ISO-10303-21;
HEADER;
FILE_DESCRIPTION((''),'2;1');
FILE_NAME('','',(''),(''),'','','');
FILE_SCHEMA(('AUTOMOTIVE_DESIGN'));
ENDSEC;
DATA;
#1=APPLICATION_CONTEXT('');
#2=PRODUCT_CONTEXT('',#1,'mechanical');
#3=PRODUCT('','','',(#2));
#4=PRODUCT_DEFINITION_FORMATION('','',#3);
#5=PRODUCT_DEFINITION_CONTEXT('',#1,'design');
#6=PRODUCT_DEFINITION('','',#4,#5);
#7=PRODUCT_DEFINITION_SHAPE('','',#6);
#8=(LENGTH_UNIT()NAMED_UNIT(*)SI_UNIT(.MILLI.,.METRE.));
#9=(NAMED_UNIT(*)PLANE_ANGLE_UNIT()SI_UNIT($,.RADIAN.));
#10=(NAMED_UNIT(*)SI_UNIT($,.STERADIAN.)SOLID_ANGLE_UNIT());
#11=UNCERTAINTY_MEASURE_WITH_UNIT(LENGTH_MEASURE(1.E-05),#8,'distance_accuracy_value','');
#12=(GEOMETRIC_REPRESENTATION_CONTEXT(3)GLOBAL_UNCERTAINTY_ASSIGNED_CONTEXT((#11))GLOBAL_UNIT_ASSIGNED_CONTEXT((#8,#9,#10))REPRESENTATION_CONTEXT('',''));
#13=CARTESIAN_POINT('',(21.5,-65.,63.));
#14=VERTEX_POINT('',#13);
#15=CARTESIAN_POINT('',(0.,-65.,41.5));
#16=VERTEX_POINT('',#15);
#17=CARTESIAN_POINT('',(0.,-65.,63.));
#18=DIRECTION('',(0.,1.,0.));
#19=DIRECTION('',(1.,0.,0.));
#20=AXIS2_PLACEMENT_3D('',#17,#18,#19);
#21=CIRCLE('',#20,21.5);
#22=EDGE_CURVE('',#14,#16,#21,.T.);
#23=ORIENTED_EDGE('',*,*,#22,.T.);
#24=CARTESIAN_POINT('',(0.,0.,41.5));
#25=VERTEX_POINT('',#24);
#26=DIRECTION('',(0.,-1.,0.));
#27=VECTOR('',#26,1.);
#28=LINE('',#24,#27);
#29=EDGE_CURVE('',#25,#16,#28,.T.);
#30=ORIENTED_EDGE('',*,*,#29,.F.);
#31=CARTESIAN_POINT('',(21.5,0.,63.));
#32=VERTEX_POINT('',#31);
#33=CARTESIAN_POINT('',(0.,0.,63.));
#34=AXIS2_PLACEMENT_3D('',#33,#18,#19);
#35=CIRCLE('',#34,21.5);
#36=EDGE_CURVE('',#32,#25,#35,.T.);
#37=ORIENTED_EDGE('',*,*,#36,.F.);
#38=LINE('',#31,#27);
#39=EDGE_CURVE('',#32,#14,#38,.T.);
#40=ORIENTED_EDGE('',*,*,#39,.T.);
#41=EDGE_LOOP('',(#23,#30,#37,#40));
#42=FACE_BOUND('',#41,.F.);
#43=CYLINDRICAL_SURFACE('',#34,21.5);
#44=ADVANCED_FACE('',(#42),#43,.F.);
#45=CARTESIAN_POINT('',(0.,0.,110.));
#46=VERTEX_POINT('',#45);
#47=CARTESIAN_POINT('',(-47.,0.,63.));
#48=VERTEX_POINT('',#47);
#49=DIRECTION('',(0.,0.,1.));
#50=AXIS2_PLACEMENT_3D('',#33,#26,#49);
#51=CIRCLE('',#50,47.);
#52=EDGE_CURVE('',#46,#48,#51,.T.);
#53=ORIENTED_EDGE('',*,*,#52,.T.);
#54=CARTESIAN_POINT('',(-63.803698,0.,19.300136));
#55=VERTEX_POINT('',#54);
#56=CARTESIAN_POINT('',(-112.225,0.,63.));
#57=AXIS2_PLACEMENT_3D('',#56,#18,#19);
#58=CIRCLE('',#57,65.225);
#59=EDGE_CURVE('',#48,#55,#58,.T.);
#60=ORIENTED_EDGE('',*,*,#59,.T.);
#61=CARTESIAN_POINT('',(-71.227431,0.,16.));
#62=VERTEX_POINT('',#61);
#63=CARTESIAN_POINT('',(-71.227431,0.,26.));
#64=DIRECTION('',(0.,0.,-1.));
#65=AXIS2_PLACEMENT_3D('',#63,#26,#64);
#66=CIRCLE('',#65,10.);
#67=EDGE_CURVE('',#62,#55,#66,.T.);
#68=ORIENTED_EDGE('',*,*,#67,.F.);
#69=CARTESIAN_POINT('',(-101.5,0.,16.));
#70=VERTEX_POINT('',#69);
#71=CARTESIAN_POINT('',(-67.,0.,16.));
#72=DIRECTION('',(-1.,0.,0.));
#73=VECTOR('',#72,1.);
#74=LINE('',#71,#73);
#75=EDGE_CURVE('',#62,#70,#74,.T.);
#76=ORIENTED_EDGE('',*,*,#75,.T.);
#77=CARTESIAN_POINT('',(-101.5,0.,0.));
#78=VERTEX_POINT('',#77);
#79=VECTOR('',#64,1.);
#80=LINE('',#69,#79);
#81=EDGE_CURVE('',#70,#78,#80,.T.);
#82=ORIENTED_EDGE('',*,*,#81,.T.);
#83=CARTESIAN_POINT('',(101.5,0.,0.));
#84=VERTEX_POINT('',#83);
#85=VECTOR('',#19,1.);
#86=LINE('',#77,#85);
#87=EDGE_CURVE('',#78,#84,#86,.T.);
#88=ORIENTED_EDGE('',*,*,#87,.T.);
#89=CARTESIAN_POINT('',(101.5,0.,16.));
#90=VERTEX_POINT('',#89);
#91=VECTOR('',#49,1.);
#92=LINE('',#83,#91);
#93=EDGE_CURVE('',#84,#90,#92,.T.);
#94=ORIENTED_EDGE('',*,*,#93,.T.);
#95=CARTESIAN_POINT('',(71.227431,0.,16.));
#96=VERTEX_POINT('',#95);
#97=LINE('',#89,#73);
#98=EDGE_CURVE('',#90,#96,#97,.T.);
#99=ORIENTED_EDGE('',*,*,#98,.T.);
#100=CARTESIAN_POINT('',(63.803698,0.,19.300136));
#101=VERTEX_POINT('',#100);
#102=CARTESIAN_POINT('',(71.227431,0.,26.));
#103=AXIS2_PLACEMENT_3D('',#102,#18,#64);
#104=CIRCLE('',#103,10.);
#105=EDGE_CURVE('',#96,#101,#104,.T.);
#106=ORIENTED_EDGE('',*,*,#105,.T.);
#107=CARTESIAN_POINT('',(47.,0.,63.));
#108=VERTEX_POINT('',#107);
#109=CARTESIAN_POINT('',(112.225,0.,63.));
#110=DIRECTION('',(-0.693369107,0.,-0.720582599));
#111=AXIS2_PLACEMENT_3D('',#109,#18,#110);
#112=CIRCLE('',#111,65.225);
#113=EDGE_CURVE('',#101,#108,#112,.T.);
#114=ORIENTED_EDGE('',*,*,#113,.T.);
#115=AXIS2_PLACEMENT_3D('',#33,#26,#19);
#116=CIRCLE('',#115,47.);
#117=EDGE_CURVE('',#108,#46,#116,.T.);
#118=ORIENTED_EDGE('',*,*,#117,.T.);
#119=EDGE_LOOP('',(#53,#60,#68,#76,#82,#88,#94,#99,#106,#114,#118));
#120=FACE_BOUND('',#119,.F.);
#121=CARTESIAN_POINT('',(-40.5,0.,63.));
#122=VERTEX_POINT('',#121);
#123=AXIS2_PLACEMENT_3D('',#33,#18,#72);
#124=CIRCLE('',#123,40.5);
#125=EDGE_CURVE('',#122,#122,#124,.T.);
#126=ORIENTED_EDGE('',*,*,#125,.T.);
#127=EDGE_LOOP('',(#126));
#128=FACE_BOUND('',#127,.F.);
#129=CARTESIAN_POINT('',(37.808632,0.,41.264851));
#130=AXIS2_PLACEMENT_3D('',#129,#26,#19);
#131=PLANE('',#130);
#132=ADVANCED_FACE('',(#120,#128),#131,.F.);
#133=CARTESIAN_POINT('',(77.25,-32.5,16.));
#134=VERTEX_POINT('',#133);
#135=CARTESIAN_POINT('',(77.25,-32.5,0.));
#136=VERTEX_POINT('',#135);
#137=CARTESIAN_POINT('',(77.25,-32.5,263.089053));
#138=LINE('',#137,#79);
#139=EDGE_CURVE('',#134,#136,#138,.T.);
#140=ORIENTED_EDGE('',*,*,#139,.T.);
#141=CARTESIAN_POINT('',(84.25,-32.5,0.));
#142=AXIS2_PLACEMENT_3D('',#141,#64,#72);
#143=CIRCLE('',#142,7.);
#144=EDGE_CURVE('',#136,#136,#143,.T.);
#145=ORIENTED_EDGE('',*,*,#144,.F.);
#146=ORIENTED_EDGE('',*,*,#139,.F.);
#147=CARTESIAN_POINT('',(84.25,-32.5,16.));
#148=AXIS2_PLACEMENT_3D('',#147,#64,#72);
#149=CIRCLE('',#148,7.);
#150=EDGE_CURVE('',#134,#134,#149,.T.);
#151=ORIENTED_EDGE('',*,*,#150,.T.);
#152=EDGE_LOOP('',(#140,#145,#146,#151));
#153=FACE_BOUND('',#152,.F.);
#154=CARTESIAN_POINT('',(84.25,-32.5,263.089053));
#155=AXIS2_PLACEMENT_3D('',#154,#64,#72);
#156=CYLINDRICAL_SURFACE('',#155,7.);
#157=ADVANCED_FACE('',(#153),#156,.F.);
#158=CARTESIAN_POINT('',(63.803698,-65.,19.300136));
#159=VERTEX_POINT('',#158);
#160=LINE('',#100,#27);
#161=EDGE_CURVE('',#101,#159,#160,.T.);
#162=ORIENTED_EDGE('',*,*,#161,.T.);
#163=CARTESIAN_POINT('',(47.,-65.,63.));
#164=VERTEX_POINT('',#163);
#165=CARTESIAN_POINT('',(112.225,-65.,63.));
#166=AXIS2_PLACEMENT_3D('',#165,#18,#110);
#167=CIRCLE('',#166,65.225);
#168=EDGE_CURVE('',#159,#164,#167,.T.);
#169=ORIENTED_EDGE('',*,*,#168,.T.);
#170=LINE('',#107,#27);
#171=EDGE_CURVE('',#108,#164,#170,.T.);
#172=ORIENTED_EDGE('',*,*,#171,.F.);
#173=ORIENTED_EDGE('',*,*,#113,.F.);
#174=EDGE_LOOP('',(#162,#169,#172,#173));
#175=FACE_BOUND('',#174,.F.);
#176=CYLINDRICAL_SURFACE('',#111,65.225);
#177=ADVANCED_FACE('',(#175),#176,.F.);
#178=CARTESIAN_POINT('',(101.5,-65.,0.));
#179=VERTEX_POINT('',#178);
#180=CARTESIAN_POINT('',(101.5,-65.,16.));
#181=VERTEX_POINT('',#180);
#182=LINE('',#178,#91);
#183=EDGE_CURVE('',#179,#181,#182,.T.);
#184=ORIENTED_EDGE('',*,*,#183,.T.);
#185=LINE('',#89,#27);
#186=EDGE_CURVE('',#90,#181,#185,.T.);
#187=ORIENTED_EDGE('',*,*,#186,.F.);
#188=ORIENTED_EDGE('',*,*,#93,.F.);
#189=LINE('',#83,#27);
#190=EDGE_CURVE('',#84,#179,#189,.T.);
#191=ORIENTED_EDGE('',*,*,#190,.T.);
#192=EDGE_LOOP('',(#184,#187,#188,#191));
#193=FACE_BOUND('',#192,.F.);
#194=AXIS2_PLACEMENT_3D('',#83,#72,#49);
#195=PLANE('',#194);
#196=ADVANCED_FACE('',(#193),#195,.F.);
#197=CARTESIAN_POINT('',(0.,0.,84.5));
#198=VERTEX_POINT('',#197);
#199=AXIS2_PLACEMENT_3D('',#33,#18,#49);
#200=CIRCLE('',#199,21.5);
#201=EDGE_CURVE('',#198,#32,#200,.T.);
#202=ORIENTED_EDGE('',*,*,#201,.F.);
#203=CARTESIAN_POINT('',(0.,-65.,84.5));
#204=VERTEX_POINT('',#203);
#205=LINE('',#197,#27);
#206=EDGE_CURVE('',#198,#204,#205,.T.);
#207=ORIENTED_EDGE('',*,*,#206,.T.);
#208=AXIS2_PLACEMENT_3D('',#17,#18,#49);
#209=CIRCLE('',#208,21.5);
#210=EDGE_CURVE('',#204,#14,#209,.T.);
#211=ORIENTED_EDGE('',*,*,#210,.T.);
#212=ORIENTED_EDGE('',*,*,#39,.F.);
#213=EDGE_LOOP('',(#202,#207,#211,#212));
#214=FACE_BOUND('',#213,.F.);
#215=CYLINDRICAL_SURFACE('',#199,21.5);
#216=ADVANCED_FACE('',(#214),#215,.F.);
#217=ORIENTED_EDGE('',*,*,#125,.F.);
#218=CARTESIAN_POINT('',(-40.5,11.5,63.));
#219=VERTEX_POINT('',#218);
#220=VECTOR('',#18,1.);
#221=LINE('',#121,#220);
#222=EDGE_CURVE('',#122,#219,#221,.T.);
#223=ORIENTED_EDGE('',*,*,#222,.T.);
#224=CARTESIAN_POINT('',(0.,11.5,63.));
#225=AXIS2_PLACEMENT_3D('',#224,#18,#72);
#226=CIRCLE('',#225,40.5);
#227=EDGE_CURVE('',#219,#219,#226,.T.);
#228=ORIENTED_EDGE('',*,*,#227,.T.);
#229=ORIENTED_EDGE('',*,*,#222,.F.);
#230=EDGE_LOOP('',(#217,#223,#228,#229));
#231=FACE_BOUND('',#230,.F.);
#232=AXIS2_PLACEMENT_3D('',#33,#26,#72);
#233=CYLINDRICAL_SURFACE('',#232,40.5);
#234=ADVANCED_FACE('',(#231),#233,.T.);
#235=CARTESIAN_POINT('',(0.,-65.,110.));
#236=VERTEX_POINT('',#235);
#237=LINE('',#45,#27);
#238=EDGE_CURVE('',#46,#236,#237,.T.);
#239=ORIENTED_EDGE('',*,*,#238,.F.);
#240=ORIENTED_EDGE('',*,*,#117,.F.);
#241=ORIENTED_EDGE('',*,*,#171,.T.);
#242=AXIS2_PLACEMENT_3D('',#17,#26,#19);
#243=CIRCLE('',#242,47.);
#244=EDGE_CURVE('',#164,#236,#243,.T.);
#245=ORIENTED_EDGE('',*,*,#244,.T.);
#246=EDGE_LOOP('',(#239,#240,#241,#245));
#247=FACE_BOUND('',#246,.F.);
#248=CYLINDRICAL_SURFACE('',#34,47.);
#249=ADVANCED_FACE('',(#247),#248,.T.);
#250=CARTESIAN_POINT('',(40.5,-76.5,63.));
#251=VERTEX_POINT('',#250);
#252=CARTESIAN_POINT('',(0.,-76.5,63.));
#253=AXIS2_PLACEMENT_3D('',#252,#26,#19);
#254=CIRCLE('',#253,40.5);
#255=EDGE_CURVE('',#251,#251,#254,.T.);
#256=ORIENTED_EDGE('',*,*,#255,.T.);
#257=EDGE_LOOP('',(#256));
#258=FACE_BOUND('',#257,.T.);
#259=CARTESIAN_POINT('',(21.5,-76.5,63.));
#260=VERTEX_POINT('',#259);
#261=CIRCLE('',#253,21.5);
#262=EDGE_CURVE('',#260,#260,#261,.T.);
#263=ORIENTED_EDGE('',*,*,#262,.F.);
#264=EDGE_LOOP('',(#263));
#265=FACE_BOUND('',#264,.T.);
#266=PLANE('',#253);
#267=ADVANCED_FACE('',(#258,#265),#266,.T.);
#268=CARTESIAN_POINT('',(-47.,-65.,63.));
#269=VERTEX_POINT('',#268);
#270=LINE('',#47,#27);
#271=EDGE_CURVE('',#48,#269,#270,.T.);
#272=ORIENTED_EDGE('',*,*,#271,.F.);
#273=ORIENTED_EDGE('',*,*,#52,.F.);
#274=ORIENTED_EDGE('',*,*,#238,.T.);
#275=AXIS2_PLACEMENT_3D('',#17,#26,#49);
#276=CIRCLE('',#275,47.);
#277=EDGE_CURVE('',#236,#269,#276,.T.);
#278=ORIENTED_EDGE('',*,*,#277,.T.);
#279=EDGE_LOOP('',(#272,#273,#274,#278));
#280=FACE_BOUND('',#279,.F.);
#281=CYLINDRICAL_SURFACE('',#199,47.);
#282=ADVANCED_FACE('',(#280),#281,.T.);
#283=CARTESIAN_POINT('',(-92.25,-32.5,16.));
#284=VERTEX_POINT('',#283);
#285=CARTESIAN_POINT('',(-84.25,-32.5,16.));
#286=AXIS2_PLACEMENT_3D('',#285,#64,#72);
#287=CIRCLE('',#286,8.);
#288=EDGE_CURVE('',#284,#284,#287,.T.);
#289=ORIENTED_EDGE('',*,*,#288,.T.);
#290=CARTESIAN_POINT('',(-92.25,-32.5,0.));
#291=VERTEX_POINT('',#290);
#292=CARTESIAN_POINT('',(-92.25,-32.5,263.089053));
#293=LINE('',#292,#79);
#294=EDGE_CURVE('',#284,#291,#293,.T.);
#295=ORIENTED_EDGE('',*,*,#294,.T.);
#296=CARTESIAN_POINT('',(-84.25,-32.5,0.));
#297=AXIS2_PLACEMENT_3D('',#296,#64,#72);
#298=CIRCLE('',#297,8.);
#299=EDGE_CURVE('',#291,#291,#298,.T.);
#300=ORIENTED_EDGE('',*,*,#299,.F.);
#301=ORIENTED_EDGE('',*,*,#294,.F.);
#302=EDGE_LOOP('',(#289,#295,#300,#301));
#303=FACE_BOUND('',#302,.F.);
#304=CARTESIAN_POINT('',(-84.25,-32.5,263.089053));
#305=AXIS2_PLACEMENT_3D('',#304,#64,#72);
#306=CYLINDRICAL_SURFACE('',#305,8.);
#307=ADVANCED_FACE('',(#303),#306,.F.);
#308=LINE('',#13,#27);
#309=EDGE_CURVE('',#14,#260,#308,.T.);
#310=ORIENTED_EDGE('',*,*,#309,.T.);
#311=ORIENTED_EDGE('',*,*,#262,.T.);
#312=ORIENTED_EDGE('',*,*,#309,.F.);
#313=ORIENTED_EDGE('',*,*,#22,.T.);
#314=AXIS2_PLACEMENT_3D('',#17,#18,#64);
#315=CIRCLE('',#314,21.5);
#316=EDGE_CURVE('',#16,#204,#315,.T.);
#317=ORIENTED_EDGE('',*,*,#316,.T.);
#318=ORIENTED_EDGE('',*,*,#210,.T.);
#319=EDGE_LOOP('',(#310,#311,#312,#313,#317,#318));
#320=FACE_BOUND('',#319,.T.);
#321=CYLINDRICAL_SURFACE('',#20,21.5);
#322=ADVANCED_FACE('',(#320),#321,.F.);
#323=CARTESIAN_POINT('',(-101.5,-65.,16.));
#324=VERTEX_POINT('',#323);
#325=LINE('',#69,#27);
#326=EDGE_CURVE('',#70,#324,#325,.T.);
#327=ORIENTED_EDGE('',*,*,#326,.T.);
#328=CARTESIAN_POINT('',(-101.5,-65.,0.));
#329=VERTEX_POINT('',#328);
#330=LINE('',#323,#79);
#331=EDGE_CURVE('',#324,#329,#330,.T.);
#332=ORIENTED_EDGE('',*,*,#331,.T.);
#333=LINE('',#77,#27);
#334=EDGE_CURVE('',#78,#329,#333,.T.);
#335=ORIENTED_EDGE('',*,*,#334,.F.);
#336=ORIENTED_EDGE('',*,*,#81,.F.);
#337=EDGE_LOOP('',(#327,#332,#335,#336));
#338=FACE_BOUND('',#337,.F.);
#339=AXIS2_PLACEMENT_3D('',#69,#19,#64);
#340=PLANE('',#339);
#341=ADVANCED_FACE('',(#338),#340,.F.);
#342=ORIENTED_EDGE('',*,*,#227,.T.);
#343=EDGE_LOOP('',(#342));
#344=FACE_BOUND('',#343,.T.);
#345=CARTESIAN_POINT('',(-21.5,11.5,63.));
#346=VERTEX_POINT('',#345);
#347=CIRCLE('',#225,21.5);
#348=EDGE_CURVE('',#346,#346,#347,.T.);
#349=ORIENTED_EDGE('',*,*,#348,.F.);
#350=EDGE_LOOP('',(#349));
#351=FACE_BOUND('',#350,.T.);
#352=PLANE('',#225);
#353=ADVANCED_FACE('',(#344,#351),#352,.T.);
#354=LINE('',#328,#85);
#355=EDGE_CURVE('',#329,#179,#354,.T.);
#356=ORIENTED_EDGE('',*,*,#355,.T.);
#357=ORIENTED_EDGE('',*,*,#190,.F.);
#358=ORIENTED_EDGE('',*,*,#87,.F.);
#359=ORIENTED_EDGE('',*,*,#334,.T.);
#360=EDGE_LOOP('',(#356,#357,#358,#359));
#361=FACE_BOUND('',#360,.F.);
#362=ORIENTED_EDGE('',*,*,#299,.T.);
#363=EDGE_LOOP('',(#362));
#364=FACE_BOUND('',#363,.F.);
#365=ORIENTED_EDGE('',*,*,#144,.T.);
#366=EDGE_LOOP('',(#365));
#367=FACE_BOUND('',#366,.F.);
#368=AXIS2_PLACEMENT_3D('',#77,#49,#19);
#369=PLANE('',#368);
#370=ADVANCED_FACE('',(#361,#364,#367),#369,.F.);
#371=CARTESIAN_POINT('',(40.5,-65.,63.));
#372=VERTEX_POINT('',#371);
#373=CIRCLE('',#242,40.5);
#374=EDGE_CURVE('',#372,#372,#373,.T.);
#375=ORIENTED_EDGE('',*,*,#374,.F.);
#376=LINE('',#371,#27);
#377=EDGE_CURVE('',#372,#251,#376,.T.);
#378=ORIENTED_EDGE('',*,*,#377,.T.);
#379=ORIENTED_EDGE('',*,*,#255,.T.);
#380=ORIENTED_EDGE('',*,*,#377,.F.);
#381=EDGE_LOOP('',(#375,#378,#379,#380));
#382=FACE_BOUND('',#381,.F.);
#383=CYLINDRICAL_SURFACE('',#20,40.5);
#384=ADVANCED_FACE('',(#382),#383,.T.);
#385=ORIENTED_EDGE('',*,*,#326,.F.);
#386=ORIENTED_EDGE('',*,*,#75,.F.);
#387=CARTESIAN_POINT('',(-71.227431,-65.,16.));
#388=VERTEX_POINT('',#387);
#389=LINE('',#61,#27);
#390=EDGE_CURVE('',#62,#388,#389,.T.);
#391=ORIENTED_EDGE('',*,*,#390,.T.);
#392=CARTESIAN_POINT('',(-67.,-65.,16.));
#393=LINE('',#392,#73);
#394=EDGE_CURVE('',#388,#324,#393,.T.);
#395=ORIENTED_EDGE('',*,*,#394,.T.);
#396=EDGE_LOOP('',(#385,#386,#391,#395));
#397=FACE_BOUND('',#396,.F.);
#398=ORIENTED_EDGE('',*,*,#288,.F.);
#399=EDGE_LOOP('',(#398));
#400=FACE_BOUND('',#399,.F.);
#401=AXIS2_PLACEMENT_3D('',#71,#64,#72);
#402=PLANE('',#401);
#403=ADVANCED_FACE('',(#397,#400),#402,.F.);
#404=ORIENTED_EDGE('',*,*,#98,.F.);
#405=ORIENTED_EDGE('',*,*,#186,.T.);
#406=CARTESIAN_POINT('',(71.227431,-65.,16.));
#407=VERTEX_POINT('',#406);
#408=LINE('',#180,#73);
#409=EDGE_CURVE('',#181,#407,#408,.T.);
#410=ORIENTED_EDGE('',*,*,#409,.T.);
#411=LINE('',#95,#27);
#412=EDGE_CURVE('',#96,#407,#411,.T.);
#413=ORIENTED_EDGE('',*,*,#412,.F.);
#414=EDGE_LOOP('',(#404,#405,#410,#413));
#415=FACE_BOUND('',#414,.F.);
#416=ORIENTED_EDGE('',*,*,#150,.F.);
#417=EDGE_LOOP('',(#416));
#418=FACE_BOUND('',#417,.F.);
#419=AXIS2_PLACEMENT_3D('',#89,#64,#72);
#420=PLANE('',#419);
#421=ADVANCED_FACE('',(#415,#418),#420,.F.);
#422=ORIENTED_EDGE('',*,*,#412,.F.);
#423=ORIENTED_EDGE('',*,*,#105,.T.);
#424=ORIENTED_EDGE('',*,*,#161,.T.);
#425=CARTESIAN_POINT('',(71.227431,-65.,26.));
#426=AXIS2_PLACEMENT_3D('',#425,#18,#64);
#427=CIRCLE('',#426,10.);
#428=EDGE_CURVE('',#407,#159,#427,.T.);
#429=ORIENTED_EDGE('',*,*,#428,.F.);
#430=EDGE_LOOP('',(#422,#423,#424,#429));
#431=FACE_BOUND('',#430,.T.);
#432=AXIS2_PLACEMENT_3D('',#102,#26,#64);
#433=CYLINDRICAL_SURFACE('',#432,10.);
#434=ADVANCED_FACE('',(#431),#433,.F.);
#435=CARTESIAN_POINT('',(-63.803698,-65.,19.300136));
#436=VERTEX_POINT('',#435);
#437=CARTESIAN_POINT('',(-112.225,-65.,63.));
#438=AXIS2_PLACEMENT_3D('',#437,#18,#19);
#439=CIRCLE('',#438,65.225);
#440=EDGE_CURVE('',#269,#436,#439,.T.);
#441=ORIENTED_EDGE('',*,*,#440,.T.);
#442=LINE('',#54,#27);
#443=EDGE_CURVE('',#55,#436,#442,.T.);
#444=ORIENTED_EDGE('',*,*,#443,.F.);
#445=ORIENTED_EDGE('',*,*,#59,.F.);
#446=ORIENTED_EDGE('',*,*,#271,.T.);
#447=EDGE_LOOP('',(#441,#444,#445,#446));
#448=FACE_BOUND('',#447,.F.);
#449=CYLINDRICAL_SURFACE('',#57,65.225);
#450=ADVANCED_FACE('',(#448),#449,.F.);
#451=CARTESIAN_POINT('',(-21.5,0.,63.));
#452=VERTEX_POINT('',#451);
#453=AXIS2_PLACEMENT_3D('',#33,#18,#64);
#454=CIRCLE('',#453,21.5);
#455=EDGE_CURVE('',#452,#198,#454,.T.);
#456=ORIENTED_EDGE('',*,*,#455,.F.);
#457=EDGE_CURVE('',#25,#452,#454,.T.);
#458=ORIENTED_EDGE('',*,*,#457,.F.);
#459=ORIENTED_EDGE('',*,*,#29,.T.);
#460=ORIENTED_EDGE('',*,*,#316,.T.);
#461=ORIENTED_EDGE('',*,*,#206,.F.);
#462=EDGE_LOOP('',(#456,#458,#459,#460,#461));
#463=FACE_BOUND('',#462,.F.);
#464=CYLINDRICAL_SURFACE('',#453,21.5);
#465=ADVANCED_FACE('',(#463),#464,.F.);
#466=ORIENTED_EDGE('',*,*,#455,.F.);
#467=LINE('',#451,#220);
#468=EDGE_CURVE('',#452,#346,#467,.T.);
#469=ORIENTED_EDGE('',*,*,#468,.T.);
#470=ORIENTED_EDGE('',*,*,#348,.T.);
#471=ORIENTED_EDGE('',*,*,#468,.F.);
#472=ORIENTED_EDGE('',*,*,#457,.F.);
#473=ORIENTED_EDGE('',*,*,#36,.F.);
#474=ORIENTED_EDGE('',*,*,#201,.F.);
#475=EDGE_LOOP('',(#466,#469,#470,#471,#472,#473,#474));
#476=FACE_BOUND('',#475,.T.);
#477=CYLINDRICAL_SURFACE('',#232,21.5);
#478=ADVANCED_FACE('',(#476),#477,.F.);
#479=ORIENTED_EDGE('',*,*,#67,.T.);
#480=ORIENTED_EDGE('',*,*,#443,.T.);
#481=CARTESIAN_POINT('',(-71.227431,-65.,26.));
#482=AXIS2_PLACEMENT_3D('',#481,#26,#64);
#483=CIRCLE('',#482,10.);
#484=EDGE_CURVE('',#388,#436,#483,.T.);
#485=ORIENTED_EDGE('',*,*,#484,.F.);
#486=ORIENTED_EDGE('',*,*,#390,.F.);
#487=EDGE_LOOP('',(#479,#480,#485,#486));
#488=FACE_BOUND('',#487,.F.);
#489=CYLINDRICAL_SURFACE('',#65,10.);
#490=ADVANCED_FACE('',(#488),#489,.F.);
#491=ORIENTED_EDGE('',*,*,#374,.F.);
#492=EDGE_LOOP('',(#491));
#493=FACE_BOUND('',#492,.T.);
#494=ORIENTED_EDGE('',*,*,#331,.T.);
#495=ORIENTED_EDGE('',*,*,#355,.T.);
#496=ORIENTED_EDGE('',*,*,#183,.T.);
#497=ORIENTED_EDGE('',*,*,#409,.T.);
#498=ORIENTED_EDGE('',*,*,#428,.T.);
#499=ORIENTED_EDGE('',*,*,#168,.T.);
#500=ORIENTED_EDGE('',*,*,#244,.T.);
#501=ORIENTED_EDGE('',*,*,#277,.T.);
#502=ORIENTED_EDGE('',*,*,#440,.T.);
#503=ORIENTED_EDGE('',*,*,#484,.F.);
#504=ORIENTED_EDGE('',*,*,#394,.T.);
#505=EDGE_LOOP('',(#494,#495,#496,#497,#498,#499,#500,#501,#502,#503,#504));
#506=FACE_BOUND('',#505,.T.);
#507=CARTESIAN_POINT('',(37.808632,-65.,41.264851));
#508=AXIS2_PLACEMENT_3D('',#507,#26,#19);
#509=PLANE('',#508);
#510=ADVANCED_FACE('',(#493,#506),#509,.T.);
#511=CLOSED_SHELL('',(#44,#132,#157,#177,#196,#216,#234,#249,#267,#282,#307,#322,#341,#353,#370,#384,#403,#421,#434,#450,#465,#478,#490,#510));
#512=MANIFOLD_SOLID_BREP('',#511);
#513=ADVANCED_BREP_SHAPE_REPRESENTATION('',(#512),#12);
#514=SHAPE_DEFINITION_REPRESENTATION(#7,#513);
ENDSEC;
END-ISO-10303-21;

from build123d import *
from build123d import SkipClean  # not in build123d's __all__

# Parameters (mm, degrees)
F1_DEPTH = 65
F2_R     = 40.5
F2_R_2   = 21.5
F3_DEPTH = 11.5
F4_R     = 40.5
F4_R_2   = 21.5
F5_DEPTH = 11.5
F7_D     = 14
F9_R     = 10
F10_D    = 16


# Not quite as in the source:
# - after a boolean that leaves OpenCascade's solid faulty, fix() repairs it


with BuildPart() as f1:
    # F0 (on Front) → F1 (new body)
    with BuildSketch(Plane.XZ):
        with BuildLine():
            Line((0, 16), (0, 0))
            Line((0, 0), (101.5, 0))
            Line((101.5, 0), (101.5, 16))
            Line((101.5, 16), (67, 16))
            ThreePointArc((67, 16), (52.2079138911, 37.4608144218), (47, 63))
            ThreePointArc((47, 63), (33.2340187158, 96.2340187158), (0, 110))
            Line((0, 110), (0, 84.5))
            ThreePointArc((0, 84.5), (15.2027957955, 78.2027957955), (21.5, 63))
            ThreePointArc((21.5, 63), (15.2027957955, 47.7972042045), (0, 41.5))
            Line((0, 41.5), (0, 16))
        make_face()
        with BuildLine():
            Line((-101.5, 0), (0, 0))
            Line((0, 0), (0, 16))
            Line((0, 16), (0, 41.5))
            ThreePointArc((0, 41.5), (-21.5, 63), (0, 84.5))
            Line((0, 84.5), (0, 110))
            ThreePointArc((0, 110), (-33.2340187158, 96.2340187158), (-47, 63))
            ThreePointArc((-47, 63), (-52.2079138911, 37.4608144218), (-67, 16))
            Line((-67, 16), (-101.5, 16))
            Line((-101.5, 16), (-101.5, 0))
        make_face()
    extrude(amount=F1_DEPTH)

    # F2 (on face) → F3 (join)
    with BuildSketch(Plane.XZ.offset(65)):
        with Locations((0, 63)):
            Circle(F2_R)
        with Locations((0, 63)):
            Circle(F2_R_2, mode=Mode.SUBTRACT)
    extrude(amount=F3_DEPTH)

    # F4 (on face) → F5 (join)
    with BuildSketch(Plane(origin=(0, 0, 0), x_dir=(-1, 0, 0), z_dir=(0, 1, 0))):
        with Locations((0, 63)):
            Circle(F4_R)
        with Locations((0, 63)):
            Circle(F4_R_2, mode=Mode.SUBTRACT)
    with SkipClean():  # cleaning this boolean's faces spoils the solid; the shape is the same uncleaned
        extrude(amount=F5_DEPTH)

    # F7 (through all)
    with Locations(Plane.XY.offset(16)):
        with Locations((84.25, -32.5)):
            Hole(F7_D / 2)

    add(f1.part.fix(), mode=Mode.REPLACE)

    # F9
    f9_edges = [f1.edges().sort_by_distance(p)[0] for p in [
        (-67, -32.5, 16),
        (67, -32.5, 16),
    ]]
    fillet(f9_edges, radius=F9_R)

    # F10 (through all)
    with Locations(Plane.XY.offset(16)):
        with Locations((-84.25, -32.5)):
            Hole(F10_D / 2)


solid = f1.part
